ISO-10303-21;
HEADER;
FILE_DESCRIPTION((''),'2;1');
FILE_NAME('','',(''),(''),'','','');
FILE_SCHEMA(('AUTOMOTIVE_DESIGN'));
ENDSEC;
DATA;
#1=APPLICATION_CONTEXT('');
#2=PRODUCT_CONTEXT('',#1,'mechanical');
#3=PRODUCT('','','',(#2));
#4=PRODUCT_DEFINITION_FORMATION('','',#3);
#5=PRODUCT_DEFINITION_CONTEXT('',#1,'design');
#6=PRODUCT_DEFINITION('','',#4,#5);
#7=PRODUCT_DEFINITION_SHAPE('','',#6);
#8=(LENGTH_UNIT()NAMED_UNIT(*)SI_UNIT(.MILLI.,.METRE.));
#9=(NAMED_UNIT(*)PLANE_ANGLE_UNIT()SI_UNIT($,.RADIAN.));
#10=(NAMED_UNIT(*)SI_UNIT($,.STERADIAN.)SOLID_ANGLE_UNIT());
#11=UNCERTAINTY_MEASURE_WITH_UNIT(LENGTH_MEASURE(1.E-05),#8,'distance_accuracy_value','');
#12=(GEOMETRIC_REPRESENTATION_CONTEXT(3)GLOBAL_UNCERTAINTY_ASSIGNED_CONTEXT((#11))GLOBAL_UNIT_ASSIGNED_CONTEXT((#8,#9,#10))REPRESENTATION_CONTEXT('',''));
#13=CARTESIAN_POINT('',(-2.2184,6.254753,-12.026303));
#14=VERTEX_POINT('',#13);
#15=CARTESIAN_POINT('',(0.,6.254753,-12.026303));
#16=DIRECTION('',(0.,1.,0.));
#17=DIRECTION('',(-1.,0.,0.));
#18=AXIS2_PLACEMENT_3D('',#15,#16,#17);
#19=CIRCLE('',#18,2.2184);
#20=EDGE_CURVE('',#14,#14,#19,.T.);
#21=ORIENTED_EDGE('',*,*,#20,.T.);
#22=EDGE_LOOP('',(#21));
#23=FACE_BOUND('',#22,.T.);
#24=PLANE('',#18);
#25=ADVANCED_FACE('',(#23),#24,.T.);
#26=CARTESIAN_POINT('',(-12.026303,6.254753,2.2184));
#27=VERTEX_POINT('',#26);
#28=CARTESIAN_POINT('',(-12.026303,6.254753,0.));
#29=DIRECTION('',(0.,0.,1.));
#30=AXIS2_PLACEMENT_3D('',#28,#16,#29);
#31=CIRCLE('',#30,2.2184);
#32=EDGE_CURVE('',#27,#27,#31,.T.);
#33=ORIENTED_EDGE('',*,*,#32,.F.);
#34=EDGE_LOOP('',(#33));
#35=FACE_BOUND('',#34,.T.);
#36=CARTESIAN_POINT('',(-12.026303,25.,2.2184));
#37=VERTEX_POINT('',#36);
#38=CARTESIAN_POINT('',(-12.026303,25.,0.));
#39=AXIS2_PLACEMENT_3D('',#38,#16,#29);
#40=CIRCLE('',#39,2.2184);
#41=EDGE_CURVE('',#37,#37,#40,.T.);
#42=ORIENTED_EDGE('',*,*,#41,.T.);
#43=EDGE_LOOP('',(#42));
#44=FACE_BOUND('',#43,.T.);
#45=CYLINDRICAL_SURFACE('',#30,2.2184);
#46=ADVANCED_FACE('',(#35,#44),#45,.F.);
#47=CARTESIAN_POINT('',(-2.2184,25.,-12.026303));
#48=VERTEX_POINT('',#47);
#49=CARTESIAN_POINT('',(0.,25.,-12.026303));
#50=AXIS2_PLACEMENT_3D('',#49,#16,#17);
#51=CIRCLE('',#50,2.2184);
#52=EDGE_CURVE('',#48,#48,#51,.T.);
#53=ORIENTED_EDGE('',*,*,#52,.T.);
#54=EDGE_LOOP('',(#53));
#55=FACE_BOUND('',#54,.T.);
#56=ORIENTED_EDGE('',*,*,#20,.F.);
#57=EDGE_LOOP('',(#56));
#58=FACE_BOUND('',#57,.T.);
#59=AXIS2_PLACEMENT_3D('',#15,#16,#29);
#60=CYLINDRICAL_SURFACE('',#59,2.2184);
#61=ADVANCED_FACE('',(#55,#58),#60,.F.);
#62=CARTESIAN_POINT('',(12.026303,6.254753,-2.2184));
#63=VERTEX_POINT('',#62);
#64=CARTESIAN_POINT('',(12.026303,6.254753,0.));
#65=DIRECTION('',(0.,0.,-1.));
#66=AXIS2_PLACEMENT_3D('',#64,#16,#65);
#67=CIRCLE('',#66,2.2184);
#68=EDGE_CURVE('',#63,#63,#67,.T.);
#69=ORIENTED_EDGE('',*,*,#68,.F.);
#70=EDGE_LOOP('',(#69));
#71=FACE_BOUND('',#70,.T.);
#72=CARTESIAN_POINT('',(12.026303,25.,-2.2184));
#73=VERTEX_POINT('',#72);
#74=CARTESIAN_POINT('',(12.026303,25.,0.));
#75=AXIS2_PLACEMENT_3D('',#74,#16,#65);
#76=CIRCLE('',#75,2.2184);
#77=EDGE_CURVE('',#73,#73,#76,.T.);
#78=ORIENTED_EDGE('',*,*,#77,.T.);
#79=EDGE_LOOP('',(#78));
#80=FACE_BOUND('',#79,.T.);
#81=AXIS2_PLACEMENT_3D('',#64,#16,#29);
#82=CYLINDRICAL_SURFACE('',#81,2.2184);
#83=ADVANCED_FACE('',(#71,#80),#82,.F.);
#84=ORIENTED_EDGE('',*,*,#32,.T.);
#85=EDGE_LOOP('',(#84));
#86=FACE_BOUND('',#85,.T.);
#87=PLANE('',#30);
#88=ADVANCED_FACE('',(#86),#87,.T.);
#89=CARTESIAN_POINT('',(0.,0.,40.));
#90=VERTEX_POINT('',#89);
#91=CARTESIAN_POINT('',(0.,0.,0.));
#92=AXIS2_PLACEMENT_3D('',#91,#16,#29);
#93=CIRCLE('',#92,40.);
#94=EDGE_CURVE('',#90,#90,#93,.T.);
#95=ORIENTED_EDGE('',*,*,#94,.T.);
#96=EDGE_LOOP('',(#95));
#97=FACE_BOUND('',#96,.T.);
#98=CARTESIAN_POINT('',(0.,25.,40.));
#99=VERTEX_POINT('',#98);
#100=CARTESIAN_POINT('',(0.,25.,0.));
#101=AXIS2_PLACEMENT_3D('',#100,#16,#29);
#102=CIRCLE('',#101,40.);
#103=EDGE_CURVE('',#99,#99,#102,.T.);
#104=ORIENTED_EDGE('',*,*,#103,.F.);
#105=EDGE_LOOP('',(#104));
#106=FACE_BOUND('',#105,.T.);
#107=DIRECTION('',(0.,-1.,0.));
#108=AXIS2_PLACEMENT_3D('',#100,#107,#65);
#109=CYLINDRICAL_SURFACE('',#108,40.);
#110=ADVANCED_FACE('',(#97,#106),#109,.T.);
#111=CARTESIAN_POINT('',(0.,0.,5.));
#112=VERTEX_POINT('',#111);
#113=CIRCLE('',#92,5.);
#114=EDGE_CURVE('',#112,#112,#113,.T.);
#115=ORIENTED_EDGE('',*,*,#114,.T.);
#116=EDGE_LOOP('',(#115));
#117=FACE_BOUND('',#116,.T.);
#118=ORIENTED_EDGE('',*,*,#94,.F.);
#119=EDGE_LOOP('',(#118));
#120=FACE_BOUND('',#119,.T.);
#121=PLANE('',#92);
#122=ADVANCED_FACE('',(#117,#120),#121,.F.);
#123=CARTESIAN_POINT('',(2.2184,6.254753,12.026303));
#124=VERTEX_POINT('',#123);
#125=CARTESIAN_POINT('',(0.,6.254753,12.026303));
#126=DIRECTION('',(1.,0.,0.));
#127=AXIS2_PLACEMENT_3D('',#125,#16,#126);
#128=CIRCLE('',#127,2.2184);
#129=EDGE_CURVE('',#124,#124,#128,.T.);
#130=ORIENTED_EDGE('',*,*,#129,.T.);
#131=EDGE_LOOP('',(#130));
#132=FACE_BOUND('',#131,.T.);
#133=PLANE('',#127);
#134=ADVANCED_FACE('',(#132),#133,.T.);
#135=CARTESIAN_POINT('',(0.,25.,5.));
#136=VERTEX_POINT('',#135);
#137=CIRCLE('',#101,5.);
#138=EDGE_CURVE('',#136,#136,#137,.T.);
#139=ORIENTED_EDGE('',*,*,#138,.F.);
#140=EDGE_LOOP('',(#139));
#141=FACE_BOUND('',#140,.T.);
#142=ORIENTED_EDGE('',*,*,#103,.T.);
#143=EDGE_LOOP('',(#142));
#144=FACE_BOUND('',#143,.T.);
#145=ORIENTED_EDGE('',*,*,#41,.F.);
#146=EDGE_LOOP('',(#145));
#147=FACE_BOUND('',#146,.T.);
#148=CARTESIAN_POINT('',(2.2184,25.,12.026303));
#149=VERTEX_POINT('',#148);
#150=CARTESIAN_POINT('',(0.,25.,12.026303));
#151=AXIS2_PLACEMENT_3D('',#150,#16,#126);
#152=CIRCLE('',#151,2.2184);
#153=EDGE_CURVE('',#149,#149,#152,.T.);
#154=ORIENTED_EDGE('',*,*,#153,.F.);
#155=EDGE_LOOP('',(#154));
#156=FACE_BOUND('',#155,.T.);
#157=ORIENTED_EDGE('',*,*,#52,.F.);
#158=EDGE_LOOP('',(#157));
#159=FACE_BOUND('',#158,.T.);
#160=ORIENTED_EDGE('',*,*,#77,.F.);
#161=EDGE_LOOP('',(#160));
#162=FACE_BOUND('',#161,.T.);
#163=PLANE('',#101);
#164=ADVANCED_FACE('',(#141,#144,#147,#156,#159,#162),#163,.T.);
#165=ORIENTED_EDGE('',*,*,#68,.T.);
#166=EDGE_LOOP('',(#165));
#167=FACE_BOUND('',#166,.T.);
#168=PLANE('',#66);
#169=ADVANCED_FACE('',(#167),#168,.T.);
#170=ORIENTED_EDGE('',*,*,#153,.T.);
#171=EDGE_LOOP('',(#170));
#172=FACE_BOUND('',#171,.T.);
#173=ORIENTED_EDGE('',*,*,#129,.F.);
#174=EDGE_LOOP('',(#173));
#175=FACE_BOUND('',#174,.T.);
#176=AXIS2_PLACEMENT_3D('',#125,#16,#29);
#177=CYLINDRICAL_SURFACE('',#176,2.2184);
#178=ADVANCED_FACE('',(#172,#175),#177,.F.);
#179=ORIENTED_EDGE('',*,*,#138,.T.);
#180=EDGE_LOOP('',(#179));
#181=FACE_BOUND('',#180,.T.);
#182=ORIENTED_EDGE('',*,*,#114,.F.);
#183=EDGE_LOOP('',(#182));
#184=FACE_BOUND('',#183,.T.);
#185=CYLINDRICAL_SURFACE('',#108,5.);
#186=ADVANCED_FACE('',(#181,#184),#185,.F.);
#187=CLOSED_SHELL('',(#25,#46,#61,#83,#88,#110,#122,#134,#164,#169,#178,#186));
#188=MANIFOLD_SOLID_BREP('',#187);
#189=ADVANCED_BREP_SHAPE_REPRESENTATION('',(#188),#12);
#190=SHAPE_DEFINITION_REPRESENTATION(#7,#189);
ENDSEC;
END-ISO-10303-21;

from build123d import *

# Parameters (mm, degrees)
SKETCH1_R           = 40
BOSS_EXTRUDE1_DEPTH = 25
SKETCH2_R           = 5
CUT_EXTRUDE1_DEPTH  = 62.846584384
SKETCH3_R           = 2.218400004
CUT_EXTRUDE2_DEPTH  = 18.74524742
CIRPATTERN1_COUNT   = 4


with BuildPart() as part:
    # Sketch1 → Boss-Extrude1 (new body)
    with BuildSketch(Plane(origin=(0, 0, 0), x_dir=(1, 0, 0), z_dir=(0, 1, 0))):
        Circle(SKETCH1_R)
    extrude(amount=BOSS_EXTRUDE1_DEPTH)

    # Sketch2 → Cut-Extrude1 (cut, through all)
    with BuildSketch(Plane(origin=(0, 0, 0), x_dir=(1, 0, 0), z_dir=(0, 1, 0))):
        Circle(SKETCH2_R)
    extrude(amount=CUT_EXTRUDE1_DEPTH, mode=Mode.SUBTRACT)

    # Sketch3 → Cut-Extrude2 (cut)
    with BuildSketch(Plane(origin=(0, 25, 0), x_dir=(1, 0, 0), z_dir=(0, 1, 0))):
        with Locations((-12.026302648, 0)):
            Circle(SKETCH3_R)
    cut_extrude2 = extrude(amount=-CUT_EXTRUDE2_DEPTH, mode=Mode.SUBTRACT)

    # CirPattern1: Cut-Extrude2 ×4 about axis
    cirpattern1_axis = Axis((0, 0, 0), (0, 1, 0))
    for i in range(1, CIRPATTERN1_COUNT):
        add(cut_extrude2.rotate(cirpattern1_axis, i * 360 / CIRPATTERN1_COUNT), mode=Mode.SUBTRACT)


solid = part.part
